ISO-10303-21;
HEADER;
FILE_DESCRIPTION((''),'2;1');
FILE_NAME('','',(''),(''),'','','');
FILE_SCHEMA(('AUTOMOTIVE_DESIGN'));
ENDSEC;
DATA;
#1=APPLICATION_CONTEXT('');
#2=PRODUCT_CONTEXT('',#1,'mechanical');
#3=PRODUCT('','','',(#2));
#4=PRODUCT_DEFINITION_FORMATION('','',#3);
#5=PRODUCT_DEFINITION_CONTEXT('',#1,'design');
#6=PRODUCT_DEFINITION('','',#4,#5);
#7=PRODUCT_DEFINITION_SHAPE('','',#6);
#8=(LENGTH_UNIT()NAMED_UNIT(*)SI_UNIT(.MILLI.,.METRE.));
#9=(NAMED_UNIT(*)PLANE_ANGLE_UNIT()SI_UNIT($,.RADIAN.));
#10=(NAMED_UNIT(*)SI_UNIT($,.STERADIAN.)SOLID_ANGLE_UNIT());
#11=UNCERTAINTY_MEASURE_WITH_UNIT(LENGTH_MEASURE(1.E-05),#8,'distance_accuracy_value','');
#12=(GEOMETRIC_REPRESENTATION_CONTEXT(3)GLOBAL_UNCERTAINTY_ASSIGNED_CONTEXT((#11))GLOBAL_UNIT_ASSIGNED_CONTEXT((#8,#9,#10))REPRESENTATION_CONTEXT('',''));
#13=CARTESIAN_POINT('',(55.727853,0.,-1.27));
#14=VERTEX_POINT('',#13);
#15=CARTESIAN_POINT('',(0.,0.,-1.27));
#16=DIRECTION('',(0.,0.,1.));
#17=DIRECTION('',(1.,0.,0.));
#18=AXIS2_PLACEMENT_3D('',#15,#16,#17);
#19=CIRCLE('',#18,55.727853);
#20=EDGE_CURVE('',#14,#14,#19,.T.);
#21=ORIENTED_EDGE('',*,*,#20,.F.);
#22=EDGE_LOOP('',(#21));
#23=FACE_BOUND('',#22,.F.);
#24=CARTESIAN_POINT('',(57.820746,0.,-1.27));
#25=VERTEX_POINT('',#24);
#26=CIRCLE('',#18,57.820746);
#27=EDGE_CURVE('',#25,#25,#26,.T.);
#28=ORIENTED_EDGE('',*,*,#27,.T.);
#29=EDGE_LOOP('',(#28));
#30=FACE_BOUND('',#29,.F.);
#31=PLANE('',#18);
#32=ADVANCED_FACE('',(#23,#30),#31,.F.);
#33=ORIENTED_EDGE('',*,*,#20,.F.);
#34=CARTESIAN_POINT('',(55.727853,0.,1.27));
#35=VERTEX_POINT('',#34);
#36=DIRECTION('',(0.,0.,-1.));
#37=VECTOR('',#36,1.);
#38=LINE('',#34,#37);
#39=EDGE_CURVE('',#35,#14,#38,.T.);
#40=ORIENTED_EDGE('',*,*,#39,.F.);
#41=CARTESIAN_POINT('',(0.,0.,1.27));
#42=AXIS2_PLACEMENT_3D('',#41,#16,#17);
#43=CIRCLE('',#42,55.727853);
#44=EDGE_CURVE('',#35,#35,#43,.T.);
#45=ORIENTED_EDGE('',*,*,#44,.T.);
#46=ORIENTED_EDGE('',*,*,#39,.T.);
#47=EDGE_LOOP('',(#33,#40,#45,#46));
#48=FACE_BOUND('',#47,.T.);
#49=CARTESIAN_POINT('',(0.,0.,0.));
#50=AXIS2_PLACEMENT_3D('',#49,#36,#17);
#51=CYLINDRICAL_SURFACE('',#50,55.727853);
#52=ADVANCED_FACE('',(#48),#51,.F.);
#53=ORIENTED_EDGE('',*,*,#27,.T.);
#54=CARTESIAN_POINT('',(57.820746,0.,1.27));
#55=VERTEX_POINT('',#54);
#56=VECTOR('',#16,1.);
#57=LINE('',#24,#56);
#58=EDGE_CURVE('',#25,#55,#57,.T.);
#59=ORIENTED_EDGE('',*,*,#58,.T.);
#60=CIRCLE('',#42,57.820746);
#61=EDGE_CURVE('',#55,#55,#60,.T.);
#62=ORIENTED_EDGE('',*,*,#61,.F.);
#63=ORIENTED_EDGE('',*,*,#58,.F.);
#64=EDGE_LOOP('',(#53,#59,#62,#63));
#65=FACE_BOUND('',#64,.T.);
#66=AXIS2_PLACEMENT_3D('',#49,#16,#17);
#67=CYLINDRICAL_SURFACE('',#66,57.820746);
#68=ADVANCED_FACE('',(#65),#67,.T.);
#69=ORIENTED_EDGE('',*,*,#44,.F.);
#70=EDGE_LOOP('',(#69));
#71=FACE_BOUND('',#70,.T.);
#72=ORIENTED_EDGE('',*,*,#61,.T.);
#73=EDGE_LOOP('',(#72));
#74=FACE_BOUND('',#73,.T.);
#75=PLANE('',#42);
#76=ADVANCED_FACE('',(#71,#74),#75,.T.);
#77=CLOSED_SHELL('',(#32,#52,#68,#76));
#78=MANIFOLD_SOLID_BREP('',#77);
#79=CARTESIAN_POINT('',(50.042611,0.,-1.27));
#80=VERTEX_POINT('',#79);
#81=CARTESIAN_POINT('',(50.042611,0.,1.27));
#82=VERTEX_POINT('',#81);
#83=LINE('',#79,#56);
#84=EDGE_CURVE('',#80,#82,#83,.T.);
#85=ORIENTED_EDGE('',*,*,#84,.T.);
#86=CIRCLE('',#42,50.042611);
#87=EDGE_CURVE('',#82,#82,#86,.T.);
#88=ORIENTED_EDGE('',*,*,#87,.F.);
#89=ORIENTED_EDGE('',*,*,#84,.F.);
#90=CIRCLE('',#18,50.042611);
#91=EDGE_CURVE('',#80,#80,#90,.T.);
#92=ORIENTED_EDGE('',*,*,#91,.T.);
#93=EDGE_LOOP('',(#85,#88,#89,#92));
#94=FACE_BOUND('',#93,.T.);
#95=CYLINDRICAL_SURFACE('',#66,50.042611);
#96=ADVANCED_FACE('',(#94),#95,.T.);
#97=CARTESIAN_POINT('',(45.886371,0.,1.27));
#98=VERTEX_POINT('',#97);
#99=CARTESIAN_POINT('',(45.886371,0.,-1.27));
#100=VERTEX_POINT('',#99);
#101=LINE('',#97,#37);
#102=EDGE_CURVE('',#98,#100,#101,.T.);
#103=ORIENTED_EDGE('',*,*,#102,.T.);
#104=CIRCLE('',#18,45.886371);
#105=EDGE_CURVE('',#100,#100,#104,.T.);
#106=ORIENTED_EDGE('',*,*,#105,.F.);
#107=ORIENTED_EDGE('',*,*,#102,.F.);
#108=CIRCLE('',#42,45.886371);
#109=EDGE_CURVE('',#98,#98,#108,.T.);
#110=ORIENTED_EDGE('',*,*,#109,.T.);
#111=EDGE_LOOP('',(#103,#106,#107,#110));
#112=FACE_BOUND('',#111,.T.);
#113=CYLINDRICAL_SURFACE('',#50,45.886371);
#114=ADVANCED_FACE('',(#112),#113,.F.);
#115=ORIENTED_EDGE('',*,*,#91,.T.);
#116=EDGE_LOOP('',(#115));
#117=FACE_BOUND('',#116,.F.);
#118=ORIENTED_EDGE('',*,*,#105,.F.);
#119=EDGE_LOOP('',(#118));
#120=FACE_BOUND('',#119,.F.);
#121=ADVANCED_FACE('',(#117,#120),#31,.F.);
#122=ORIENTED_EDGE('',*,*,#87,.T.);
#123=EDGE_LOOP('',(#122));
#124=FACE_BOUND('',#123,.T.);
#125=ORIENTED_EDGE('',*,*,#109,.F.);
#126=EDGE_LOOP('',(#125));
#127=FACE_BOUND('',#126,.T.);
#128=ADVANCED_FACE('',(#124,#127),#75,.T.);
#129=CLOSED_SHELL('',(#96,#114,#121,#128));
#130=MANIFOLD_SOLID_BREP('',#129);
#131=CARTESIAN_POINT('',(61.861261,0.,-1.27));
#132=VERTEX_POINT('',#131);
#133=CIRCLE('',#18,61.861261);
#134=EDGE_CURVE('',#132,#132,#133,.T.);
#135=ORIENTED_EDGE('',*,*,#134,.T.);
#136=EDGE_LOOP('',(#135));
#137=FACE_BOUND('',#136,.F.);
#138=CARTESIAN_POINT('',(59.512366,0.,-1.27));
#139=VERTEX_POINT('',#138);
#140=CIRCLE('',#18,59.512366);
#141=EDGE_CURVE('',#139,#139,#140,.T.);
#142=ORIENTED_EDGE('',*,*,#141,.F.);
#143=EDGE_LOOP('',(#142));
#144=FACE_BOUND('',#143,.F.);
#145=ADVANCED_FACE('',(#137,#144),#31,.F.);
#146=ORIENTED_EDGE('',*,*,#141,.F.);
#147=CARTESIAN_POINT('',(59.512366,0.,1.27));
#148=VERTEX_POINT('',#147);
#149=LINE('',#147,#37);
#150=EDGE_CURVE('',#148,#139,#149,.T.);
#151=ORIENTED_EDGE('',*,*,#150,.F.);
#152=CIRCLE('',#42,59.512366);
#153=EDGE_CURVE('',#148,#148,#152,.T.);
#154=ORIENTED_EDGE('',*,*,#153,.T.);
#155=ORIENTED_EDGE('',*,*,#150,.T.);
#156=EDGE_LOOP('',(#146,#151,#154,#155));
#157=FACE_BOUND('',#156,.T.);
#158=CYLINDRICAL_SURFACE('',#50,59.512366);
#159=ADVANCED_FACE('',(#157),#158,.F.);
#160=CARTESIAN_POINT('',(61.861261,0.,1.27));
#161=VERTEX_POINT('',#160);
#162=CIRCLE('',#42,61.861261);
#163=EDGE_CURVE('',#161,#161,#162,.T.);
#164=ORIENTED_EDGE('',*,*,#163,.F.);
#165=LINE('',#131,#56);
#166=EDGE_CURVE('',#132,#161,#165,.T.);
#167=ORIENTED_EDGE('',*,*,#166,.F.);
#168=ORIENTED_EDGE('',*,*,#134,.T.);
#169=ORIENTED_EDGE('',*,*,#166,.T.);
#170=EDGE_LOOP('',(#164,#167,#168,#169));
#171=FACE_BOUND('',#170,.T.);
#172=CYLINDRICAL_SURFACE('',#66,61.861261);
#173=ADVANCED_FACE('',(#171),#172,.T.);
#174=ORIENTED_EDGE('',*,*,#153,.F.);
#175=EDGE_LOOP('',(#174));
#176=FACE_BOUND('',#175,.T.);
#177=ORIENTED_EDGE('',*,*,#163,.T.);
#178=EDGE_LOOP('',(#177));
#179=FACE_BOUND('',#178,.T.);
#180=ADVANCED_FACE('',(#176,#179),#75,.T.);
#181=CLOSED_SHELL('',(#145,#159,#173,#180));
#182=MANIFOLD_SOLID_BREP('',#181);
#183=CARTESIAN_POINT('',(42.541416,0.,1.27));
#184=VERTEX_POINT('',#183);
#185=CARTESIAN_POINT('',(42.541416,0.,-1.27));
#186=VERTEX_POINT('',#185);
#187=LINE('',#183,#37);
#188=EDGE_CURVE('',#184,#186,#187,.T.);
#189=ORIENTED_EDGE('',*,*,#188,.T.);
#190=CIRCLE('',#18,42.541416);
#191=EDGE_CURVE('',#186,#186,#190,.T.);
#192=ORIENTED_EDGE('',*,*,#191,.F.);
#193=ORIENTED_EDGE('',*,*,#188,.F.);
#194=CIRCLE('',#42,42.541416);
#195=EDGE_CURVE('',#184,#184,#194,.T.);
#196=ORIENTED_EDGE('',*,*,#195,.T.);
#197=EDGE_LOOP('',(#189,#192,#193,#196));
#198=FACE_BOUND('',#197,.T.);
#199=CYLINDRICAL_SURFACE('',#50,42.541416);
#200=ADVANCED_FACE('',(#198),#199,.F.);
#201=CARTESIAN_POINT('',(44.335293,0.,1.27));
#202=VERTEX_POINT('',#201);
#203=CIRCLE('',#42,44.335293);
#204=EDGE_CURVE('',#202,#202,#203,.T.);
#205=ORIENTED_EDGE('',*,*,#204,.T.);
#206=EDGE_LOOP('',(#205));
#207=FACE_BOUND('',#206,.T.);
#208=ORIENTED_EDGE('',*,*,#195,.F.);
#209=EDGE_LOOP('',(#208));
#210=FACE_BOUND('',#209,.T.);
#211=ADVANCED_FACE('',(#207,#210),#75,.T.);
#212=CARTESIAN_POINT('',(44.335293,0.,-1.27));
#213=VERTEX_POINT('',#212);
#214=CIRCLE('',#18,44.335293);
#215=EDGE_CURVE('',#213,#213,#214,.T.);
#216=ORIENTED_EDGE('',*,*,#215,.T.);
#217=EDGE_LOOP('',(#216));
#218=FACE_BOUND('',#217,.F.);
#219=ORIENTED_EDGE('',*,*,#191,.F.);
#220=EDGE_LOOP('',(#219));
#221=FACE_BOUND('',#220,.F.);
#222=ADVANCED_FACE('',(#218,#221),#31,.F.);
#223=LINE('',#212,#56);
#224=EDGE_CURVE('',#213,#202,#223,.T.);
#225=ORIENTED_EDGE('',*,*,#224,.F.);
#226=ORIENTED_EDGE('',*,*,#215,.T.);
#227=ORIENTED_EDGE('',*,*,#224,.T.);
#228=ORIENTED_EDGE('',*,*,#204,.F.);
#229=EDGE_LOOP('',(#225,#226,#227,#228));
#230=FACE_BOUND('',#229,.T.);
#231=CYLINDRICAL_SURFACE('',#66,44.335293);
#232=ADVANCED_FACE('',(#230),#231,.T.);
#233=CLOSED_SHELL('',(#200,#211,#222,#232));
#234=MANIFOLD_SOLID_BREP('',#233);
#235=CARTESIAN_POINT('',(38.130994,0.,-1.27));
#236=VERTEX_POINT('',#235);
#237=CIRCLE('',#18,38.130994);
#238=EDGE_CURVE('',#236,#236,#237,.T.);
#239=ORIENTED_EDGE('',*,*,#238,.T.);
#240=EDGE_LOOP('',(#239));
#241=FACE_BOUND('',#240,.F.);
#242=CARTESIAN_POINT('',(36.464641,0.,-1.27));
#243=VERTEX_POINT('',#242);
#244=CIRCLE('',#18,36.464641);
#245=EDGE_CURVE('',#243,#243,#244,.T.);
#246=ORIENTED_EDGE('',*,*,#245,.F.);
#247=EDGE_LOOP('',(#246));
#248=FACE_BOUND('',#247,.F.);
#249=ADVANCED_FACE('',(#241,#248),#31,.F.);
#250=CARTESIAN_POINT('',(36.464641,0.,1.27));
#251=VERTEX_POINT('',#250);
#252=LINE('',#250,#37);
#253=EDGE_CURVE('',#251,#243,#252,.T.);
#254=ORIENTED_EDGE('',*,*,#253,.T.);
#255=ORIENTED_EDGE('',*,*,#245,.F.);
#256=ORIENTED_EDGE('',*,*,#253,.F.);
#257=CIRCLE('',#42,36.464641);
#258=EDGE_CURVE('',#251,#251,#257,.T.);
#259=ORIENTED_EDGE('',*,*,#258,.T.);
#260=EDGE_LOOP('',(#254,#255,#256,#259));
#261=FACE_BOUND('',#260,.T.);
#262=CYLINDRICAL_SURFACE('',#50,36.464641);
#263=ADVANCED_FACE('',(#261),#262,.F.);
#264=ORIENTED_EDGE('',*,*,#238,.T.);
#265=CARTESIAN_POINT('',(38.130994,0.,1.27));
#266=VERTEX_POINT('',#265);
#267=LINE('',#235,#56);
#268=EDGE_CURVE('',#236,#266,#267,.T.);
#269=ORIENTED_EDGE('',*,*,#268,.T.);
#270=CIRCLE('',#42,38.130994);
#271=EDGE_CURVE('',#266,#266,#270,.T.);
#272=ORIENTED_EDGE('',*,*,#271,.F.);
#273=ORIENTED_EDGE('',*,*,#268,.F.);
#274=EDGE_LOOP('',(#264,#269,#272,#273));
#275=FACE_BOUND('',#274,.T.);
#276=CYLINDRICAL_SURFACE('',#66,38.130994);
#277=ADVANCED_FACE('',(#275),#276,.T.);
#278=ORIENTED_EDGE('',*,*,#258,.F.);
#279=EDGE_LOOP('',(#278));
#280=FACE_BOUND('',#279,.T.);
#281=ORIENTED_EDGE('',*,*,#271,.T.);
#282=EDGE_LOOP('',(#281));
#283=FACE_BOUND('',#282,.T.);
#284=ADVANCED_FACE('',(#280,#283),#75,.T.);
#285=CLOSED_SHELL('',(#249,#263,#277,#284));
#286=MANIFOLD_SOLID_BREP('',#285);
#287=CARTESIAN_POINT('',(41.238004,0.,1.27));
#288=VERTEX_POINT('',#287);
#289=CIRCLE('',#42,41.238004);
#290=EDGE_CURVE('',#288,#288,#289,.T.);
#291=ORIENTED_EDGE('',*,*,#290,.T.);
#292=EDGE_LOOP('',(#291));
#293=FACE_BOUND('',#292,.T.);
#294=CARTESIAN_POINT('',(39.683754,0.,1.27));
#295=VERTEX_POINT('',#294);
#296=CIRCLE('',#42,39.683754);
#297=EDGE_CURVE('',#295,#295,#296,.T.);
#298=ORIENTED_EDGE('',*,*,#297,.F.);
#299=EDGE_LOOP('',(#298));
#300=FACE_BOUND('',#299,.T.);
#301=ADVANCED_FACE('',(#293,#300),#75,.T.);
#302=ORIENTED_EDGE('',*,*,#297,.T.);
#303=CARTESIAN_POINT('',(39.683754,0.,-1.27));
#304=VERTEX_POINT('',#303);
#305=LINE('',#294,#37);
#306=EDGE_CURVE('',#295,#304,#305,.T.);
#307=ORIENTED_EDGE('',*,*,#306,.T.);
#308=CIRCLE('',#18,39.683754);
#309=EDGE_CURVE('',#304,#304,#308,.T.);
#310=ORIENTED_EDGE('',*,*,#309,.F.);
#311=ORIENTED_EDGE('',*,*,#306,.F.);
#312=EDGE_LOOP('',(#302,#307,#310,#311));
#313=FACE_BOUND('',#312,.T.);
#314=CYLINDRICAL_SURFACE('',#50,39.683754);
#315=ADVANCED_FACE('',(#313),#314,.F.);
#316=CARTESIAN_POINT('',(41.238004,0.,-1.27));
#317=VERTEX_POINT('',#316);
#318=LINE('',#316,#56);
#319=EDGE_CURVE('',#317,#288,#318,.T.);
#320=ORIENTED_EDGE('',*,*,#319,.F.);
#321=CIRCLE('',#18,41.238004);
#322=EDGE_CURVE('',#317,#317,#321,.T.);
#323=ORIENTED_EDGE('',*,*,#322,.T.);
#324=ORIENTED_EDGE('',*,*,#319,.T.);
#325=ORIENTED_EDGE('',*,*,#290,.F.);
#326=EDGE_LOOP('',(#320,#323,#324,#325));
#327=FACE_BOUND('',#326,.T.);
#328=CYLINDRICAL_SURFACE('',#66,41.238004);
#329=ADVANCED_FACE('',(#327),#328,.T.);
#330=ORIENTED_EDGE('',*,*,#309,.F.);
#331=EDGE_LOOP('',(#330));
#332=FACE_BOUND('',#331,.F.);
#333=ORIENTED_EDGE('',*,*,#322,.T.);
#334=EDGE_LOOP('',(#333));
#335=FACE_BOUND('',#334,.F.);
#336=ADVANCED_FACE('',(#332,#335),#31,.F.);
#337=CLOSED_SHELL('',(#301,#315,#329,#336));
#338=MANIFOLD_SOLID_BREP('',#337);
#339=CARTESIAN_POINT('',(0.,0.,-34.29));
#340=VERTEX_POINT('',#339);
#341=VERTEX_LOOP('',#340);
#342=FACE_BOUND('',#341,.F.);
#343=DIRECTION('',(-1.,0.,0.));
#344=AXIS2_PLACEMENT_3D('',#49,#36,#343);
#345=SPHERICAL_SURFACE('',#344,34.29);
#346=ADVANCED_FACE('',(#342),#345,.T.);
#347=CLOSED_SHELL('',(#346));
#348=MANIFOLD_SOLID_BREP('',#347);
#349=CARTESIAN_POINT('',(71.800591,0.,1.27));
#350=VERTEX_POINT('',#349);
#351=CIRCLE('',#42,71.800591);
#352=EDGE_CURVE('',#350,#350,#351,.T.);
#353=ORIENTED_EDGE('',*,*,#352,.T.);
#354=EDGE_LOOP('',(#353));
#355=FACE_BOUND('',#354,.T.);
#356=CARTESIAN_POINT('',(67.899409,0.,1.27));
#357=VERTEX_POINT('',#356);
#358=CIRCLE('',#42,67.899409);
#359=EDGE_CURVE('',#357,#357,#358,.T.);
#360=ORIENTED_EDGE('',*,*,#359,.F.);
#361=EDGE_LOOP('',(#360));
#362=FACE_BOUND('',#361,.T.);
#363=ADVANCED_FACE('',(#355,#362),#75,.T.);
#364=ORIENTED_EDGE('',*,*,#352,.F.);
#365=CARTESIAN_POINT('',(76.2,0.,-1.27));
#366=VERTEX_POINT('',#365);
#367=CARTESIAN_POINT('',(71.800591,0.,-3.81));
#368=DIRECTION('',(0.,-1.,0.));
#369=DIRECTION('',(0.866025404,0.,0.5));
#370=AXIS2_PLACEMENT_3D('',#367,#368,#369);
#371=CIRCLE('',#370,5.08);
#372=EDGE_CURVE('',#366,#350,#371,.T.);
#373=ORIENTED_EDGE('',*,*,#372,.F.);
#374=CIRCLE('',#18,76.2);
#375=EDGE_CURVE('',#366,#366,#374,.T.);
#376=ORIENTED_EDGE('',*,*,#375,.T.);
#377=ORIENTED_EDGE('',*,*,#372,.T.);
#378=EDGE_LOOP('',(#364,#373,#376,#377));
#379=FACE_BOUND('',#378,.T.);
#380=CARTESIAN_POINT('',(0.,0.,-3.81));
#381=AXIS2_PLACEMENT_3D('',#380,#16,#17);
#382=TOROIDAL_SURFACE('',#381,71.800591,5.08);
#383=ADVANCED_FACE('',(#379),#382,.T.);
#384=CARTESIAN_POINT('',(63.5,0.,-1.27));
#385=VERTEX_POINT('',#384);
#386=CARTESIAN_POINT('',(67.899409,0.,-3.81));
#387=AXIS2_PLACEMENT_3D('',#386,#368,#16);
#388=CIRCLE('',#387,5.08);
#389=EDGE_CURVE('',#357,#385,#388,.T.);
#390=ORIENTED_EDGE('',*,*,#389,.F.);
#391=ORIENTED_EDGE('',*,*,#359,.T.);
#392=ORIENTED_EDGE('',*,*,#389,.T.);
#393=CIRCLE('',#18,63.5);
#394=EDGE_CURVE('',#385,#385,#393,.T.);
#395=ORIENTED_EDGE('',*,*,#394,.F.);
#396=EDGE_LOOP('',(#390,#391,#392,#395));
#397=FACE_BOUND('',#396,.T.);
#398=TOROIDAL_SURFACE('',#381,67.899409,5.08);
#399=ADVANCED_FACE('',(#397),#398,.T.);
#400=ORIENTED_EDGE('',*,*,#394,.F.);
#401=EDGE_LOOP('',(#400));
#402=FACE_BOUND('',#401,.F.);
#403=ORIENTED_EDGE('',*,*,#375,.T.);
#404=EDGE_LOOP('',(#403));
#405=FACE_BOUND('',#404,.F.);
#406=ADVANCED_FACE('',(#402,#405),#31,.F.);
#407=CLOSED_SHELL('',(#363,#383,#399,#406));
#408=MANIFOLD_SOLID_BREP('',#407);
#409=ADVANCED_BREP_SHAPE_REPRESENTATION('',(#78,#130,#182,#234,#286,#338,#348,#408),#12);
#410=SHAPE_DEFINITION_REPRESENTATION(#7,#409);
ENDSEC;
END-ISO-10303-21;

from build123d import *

# Parameters (mm, degrees)
F3_R     = 76.2
F3_R_2   = 63.5
F4_DEPTH = 1.27
F3_R_3   = 61.8612612332
F3_R_4   = 59.512366358
F3_R_5   = 57.8207462115
F3_R_6   = 55.7278531971
F3_R_7   = 50.0426111079
F3_R_8   = 45.8863707971
F3_R_9   = 44.3352929458
F3_R_10  = 42.5414160934
F3_R_11  = 41.2380044226
F3_R_12  = 39.683753914
F3_R_13  = 38.1309941729
F3_R_14  = 36.4646412836


# Not quite as in the source:
# - a fillet or chamfer that OpenCascade refuses, or shapes differently, is made with other operations: its cross-section is extruded or revolved along the edge and cut away or added


with BuildPart() as f2:
    # F0 (on Front) → F2 (revolve)
    with BuildSketch(Plane.XZ):
        with BuildLine():
            Line((0, -34.29), (0, 34.29))
            ThreePointArc((0, 34.29), (-34.29, 0), (0, -34.29))
        make_face()
    revolve(axis=Axis((0, 0, 0), (0, 0, 1)))


with BuildPart() as f4:
    # F3 (on Top) → F4 (new body, symmetric)
    with BuildSketch(Plane.XY):
        Circle(F3_R)
        Circle(F3_R_2, mode=Mode.SUBTRACT)
    extrude(amount=F4_DEPTH, both=True)

    # F5: fillet of radius 5.08 on 2 edges, made by hand

    # F5_s1 → F5_t2 (revolve, cut)
    with BuildSketch(Plane.XZ):
        with BuildLine():
            ThreePointArc((76.2, -1.27), (74.3405909488, 0.5894090512), (71.8005909488, 1.27))
            Line((71.8005909488, 1.27), (76.2, 1.27))
            Line((76.2, 1.27), (76.2, -1.27))
        make_face()
    revolve(axis=Axis((0, 0, 1.27), (0, 0, 1)), mode=Mode.SUBTRACT)

    # F5_s3 → F5_t4 (revolve, cut)
    with BuildSketch(Plane.XZ):
        with BuildLine():
            ThreePointArc((67.8994090512, 1.27), (65.3594090512, 0.5894090512), (63.5, -1.27))
            Line((63.5, -1.27), (63.5, 1.27))
            Line((63.5, 1.27), (67.8994090512, 1.27))
        make_face()
    revolve(axis=Axis((0, 0, 1.27), (0, 0, 1)), mode=Mode.SUBTRACT)


with BuildPart() as f4b:
    # F3 (on Top) → F4, piece 2 (new body, symmetric)
    with BuildSketch(Plane.XY):
        Circle(F3_R_3)
        Circle(F3_R_4, mode=Mode.SUBTRACT)
    extrude(amount=F4_DEPTH, both=True)


with BuildPart() as f4c:
    # F3 (on Top) → F4, piece 3 (new body, symmetric)
    with BuildSketch(Plane.XY):
        Circle(F3_R_5)
        Circle(F3_R_6, mode=Mode.SUBTRACT)
    extrude(amount=F4_DEPTH, both=True)


with BuildPart() as f4d:
    # F3 (on Top) → F4, piece 4 (new body, symmetric)
    with BuildSketch(Plane.XY):
        Circle(F3_R_7)
        Circle(F3_R_8, mode=Mode.SUBTRACT)
    extrude(amount=F4_DEPTH, both=True)


with BuildPart() as f4e:
    # F3 (on Top) → F4, piece 5 (new body, symmetric)
    with BuildSketch(Plane.XY):
        Circle(F3_R_9)
        Circle(F3_R_10, mode=Mode.SUBTRACT)
    extrude(amount=F4_DEPTH, both=True)


with BuildPart() as f4f:
    # F3 (on Top) → F4, piece 6 (new body, symmetric)
    with BuildSketch(Plane.XY):
        Circle(F3_R_11)
        Circle(F3_R_12, mode=Mode.SUBTRACT)
    extrude(amount=F4_DEPTH, both=True)


with BuildPart() as f4g:
    # F3 (on Top) → F4, piece 7 (new body, symmetric)
    with BuildSketch(Plane.XY):
        Circle(F3_R_13)
        Circle(F3_R_14, mode=Mode.SUBTRACT)
    extrude(amount=F4_DEPTH, both=True)


solid = Compound([f2.part, f4.part, f4b.part, f4c.part, f4d.part, f4e.part, f4f.part, f4g.part])
